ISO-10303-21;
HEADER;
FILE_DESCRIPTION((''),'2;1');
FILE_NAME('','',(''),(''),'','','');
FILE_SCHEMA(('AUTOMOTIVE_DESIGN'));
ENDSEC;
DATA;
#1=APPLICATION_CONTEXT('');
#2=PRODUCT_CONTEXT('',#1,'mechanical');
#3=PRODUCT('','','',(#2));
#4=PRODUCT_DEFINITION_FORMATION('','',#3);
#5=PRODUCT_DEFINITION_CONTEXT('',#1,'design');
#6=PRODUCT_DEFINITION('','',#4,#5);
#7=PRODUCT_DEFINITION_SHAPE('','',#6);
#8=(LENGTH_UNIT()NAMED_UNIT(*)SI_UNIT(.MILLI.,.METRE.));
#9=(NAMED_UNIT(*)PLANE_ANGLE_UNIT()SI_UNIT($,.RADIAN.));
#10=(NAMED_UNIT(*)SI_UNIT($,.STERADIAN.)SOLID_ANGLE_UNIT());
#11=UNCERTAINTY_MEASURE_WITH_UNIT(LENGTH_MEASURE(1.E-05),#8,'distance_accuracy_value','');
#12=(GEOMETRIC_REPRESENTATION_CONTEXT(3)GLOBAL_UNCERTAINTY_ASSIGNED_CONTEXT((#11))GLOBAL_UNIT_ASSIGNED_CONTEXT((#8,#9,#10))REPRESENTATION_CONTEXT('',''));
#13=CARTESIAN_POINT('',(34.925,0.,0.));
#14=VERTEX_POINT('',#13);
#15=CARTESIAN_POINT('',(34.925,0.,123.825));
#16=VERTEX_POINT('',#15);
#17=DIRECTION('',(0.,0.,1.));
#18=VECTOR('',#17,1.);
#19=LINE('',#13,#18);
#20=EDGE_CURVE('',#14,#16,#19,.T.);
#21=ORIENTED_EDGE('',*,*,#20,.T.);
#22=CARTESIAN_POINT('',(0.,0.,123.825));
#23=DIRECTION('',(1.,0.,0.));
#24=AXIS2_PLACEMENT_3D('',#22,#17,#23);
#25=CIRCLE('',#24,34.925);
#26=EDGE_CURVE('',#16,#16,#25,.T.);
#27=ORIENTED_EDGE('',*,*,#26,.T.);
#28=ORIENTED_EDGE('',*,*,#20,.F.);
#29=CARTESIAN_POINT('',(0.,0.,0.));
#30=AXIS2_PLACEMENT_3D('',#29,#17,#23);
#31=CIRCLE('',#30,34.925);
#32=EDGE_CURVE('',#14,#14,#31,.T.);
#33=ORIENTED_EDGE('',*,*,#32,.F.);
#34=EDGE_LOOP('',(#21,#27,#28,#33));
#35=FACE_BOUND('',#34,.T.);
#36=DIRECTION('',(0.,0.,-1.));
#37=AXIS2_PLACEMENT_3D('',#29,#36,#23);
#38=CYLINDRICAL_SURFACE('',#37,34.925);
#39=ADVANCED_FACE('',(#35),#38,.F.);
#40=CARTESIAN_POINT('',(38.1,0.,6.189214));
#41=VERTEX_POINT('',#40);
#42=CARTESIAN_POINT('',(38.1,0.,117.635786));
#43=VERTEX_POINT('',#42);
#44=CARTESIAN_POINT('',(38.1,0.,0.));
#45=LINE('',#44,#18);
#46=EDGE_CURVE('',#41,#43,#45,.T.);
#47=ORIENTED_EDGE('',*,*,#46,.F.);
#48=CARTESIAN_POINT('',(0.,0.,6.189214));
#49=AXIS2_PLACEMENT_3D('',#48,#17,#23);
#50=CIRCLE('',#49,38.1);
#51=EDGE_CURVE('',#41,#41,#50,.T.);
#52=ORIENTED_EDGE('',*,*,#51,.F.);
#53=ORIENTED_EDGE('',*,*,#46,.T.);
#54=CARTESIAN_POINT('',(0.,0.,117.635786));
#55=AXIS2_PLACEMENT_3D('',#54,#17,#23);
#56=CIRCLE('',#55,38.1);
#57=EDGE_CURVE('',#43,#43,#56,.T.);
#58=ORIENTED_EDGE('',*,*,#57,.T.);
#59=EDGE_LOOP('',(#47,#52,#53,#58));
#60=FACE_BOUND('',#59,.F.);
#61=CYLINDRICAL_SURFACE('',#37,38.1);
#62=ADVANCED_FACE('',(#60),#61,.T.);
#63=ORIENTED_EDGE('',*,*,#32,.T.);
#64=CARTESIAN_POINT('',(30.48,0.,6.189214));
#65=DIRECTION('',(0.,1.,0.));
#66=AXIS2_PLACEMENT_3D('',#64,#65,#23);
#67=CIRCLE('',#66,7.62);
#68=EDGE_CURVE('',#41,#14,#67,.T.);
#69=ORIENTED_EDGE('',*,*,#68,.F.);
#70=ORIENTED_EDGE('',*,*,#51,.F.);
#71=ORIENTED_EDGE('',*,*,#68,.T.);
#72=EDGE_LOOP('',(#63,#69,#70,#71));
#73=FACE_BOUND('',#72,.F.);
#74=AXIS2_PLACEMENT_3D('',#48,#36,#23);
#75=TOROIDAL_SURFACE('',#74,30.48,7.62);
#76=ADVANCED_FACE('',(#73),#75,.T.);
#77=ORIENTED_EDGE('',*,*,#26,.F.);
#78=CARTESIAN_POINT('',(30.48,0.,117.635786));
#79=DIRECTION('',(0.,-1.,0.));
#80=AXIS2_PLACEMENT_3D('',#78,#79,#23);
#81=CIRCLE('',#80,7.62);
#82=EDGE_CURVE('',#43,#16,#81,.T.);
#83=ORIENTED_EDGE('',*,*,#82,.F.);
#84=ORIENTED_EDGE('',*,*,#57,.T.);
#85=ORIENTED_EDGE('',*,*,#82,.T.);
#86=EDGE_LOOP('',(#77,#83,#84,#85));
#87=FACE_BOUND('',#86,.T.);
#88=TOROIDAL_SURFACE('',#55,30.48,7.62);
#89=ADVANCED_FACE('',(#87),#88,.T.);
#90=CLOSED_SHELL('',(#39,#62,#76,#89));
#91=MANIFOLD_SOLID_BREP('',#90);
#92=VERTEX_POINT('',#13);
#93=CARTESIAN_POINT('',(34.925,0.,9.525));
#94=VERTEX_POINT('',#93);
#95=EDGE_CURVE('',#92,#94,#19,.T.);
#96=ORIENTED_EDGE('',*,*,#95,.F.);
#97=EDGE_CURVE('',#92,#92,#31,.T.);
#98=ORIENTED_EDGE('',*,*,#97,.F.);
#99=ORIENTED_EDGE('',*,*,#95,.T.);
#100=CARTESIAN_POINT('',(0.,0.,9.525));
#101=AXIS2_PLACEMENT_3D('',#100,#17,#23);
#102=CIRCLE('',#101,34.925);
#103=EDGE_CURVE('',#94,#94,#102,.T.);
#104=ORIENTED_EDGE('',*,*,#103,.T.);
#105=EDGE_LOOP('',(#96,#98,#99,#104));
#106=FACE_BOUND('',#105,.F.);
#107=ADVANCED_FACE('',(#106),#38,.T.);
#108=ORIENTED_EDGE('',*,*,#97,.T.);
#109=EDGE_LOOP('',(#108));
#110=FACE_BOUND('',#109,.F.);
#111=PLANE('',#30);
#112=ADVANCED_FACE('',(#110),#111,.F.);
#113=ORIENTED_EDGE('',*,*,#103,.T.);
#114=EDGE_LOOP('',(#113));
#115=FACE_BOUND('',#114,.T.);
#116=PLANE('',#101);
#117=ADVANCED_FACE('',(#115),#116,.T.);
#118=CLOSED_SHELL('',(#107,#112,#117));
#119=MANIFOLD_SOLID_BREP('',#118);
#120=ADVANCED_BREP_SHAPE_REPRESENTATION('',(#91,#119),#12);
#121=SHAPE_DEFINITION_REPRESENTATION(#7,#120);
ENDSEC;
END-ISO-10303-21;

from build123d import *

# Parameters (mm, degrees)
F0_R     = 38.1
F0_R_2   = 34.925
F1_DEPTH = 123.825
F2_DEPTH = 9.525


# Not quite as in the source:
# - a fillet or chamfer that OpenCascade refuses, or shapes differently, is made with other operations: its cross-section is extruded or revolved along the edge and cut away or added


with BuildPart() as f1:
    # F0 (on Top) → F1 (new body)
    with BuildSketch(Plane.XY):
        Circle(F0_R)
        Circle(F0_R_2, mode=Mode.SUBTRACT)
    extrude(amount=F1_DEPTH)

    # F3: fillet of radius 7.62 on 1 edges, made by hand

    # F3_s1 → F3_t2 (revolve, cut)
    with BuildSketch(Plane.XZ):
        with BuildLine():
            ThreePointArc((38.1, 117.635785591), (37.25994469, 121.1138238312), (34.925, 123.825))
            Line((34.925, 123.825), (38.1, 123.825))
            Line((38.1, 123.825), (38.1, 117.635785591))
        make_face()
    revolve(axis=Axis((0, 0, 123.825), (0, 0, 1)), mode=Mode.SUBTRACT)

    # F4: fillet of radius 7.62 on 1 edges, made by hand

    # F4_s1 → F4_t2 (revolve, cut)
    with BuildSketch(Plane.XZ):
        with BuildLine():
            ThreePointArc((38.1, 6.189214409), (37.25994469, 2.7111761688), (34.925, 0))
            Line((34.925, 0), (38.1, 0))
            Line((38.1, 0), (38.1, 6.189214409))
        make_face()
    revolve(axis=Axis((0, 0, 0), (0, 0, 1)), mode=Mode.SUBTRACT)


with BuildPart() as f2:
    # F0 (on Top) → F2 (new body)
    with BuildSketch(Plane.XY):
        Circle(F0_R_2)
    extrude(amount=F2_DEPTH)


solid = Compound([f1.part, f2.part])
